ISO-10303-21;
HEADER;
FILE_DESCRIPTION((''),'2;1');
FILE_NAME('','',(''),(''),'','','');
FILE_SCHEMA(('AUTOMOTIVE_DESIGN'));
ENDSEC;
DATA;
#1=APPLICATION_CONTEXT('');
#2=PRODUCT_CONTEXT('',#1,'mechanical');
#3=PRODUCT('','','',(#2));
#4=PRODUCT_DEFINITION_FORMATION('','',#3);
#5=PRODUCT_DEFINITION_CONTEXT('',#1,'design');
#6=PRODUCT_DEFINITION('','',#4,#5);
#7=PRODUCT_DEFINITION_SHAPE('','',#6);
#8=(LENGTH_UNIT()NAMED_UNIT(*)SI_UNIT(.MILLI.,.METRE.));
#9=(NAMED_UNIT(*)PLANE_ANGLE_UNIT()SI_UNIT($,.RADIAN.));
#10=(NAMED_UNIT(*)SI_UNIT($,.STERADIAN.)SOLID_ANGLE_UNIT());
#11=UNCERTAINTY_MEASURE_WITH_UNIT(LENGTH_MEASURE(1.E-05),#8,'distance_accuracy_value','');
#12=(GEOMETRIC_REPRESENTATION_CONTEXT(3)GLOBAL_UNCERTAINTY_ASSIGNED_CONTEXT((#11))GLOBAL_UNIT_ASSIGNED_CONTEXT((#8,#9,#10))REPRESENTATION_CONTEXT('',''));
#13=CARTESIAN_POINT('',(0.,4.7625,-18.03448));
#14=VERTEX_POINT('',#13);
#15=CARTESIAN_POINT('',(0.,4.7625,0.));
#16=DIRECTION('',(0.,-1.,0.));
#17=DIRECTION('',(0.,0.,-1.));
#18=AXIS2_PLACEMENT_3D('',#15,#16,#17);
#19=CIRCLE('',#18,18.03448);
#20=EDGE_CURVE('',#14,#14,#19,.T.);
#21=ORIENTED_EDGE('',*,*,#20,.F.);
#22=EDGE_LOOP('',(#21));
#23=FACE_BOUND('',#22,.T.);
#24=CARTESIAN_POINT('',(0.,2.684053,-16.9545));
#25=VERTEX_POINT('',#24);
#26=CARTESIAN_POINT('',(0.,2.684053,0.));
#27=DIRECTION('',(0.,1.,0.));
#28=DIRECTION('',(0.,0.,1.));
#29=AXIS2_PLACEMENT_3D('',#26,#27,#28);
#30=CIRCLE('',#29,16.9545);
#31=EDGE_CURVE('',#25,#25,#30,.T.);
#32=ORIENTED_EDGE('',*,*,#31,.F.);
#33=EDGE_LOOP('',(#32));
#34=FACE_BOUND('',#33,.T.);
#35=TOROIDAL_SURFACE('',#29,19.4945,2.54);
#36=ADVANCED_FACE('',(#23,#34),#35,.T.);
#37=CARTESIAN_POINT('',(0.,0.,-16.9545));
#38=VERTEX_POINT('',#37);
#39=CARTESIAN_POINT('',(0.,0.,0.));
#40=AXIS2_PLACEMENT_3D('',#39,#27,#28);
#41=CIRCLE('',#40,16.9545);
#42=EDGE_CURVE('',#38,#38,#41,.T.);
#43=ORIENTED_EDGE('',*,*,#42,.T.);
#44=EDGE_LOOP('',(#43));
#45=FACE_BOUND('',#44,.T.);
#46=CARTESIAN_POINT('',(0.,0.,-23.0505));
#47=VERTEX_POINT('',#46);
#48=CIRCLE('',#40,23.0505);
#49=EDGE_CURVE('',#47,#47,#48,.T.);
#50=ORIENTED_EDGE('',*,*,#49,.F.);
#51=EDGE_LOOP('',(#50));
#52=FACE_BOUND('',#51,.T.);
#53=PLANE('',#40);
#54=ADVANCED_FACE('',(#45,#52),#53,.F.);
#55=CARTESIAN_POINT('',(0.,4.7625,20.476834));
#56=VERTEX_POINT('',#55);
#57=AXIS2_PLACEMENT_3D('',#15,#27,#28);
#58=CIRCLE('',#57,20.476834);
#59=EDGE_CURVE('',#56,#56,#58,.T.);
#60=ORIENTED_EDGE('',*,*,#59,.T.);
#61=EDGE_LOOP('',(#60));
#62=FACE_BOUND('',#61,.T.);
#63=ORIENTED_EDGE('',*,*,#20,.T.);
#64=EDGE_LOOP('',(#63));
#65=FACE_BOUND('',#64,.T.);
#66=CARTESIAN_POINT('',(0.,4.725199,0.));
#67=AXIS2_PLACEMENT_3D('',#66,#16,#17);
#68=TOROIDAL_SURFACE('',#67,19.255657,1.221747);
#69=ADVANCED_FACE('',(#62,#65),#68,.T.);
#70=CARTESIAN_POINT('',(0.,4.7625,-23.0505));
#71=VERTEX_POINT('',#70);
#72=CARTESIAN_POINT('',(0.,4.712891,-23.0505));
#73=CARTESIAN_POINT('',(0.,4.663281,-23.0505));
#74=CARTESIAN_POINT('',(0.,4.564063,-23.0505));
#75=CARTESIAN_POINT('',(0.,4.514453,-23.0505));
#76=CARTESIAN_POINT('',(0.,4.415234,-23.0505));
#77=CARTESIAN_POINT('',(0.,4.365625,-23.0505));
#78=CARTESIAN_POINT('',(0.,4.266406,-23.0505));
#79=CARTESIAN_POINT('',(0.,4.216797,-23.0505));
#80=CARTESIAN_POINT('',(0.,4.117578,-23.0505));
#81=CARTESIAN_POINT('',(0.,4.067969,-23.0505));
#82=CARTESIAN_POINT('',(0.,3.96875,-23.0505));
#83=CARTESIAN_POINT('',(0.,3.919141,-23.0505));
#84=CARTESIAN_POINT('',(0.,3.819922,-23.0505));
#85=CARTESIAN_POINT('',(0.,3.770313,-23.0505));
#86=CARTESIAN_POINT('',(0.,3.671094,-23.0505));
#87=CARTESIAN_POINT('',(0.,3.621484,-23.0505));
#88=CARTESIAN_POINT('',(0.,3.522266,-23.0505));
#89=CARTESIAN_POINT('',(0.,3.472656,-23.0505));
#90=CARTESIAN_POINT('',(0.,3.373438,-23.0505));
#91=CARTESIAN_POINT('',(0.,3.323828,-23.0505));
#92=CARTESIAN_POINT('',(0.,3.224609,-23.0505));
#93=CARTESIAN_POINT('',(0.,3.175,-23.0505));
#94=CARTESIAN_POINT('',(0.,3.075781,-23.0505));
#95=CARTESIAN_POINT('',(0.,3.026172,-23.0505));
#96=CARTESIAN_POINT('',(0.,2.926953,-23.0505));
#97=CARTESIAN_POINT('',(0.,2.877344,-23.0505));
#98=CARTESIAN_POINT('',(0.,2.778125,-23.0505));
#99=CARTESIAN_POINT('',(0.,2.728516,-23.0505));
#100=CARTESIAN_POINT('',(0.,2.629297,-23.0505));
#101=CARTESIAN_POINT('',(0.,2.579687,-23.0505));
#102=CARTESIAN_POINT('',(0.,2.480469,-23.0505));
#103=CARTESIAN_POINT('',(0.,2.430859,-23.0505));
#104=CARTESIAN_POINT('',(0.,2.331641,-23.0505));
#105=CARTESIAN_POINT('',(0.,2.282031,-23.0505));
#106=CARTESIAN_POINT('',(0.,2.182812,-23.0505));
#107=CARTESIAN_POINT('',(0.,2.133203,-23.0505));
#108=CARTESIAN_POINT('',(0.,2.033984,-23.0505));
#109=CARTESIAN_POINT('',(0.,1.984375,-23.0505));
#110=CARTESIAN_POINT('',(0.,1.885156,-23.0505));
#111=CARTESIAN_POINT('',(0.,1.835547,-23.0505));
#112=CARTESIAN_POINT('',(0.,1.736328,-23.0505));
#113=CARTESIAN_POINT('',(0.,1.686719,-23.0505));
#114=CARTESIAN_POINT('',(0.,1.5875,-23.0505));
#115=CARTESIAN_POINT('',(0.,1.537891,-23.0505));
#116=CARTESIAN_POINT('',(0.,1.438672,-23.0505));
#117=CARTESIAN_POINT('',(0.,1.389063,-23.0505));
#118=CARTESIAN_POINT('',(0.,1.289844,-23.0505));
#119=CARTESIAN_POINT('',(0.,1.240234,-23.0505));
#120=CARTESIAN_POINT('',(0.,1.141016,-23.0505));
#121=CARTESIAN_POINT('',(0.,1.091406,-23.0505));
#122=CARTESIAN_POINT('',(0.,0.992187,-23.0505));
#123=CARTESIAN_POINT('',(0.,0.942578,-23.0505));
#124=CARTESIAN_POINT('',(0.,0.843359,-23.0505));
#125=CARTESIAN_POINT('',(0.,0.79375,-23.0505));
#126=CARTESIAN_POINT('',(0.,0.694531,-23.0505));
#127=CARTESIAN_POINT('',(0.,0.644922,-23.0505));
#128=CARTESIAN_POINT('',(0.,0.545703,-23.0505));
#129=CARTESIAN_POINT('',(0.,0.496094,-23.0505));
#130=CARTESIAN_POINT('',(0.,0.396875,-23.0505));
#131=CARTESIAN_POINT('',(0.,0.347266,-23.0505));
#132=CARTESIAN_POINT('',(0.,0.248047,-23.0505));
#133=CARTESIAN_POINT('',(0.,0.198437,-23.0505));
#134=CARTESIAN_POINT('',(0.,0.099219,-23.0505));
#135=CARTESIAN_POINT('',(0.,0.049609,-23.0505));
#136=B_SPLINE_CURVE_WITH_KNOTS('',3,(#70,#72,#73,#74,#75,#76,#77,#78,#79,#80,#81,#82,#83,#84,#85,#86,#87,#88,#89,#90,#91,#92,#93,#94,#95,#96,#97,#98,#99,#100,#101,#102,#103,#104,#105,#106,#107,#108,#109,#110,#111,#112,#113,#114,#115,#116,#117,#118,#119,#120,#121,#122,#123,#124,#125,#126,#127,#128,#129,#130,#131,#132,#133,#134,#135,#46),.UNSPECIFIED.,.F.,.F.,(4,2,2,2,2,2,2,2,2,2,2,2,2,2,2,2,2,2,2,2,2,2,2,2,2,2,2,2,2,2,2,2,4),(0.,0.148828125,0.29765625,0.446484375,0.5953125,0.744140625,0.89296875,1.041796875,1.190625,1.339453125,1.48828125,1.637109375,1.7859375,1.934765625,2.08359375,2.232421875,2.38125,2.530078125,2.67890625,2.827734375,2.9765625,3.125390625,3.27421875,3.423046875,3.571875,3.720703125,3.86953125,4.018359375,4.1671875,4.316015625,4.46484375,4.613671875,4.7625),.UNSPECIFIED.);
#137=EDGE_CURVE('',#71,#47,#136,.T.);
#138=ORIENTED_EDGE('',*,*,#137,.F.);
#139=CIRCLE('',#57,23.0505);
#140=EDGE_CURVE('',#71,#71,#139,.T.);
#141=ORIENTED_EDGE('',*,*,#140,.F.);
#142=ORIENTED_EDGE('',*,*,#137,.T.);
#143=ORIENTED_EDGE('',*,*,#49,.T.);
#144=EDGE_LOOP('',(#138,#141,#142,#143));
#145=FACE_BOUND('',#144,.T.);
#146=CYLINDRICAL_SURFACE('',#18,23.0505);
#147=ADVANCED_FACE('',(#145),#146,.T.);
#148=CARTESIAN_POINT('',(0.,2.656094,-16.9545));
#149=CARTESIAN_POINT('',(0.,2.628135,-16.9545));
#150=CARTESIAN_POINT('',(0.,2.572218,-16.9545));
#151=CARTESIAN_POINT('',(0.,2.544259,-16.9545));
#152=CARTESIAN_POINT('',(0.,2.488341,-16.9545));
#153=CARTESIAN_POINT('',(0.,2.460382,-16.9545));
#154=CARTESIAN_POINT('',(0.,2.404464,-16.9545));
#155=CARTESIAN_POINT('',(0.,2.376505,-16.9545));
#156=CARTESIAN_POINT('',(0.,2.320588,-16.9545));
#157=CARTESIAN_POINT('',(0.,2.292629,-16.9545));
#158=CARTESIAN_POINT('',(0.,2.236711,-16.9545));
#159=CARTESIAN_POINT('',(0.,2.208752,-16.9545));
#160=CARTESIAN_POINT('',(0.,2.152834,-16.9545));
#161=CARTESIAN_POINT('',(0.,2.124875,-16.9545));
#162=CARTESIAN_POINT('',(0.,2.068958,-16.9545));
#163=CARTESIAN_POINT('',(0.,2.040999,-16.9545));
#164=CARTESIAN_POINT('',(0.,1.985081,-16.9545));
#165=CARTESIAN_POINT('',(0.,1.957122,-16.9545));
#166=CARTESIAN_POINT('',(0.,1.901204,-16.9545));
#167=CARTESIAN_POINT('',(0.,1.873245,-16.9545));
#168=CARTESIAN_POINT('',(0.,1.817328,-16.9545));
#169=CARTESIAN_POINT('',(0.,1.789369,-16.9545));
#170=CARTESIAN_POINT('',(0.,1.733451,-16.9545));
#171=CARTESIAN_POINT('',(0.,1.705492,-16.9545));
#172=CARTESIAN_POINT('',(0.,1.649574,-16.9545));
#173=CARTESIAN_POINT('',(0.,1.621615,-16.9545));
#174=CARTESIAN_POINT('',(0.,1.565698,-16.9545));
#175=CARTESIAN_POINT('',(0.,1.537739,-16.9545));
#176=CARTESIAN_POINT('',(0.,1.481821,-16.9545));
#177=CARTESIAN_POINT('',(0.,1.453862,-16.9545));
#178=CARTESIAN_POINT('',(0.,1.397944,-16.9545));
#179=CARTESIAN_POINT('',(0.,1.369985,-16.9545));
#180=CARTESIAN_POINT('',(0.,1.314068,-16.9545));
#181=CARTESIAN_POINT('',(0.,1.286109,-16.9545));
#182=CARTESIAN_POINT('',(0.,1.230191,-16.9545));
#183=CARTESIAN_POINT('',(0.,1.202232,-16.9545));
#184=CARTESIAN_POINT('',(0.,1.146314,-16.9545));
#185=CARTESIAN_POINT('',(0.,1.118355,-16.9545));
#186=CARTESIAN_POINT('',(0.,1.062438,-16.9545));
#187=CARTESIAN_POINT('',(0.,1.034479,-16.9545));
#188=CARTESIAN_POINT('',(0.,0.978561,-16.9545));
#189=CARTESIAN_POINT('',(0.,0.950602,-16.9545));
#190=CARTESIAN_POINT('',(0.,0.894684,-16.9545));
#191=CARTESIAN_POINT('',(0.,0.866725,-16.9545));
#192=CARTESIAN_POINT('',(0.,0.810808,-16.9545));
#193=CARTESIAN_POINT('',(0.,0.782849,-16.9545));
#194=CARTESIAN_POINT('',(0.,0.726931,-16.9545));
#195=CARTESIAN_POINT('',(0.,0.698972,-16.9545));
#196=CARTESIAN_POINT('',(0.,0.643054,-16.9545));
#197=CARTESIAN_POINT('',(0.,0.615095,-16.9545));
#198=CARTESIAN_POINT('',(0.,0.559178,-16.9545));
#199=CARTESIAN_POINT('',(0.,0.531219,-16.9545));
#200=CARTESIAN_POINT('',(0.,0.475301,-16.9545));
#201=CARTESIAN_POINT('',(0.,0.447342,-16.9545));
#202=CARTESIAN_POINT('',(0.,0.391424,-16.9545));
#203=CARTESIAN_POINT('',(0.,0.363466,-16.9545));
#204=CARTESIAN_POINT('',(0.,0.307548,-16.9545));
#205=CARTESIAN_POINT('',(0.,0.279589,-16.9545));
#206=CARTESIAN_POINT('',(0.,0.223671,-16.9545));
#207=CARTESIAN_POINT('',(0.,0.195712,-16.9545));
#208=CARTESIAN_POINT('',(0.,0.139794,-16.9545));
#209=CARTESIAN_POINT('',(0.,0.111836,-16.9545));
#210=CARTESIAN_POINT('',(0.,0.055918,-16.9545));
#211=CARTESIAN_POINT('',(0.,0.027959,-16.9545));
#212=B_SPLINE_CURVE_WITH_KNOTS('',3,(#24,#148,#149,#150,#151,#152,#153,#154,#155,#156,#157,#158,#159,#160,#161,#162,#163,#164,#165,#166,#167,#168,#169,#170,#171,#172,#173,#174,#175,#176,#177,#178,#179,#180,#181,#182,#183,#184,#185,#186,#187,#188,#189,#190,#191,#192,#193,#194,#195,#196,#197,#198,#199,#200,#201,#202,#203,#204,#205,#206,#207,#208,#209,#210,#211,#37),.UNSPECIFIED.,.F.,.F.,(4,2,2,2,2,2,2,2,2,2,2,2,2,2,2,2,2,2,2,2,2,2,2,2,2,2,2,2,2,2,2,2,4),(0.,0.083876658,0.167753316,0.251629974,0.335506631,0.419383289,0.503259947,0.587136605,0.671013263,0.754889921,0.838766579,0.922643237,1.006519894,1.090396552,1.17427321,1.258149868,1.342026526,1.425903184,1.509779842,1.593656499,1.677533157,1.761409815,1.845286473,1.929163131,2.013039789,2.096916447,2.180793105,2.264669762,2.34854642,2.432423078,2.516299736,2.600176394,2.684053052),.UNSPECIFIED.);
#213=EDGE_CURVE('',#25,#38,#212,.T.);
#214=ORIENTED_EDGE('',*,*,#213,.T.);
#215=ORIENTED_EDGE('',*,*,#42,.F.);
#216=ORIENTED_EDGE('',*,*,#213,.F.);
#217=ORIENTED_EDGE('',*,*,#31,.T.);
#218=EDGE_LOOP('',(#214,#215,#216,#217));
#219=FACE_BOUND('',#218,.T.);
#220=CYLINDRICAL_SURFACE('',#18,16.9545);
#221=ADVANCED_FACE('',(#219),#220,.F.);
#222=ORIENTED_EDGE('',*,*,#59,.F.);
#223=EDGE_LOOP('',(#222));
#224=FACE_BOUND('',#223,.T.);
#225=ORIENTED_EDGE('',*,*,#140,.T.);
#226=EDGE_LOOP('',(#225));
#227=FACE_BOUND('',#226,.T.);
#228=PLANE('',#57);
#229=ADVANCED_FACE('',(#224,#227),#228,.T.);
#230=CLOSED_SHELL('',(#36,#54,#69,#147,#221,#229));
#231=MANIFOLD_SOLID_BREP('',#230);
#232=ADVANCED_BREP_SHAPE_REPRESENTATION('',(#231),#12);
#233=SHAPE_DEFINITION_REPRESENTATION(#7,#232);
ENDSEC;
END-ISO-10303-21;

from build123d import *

# Parameters (mm, degrees)
SKETCH1_R           = 23.0505
SKETCH1_R_2         = 16.9545
BOSS_EXTRUDE1_DEPTH = 4.7625
FILLET1_R           = 2.54


with BuildPart() as part:
    # Sketch1 → Boss-Extrude1 (new body)
    with BuildSketch(Plane(origin=(0, 0, 0), x_dir=(1, 0, 0), z_dir=(0, 1, 0))):
        with Locations(Location((0, 0, 0), (0, 0, 90))):
            Circle(SKETCH1_R)
        with Locations(Location((0, 0, 0), (0, 0, 90))):
            Circle(SKETCH1_R_2, mode=Mode.SUBTRACT)
    extrude(amount=BOSS_EXTRUDE1_DEPTH)

    # Sketch2 → Revolve1 (revolve)
    with BuildSketch(Plane.XY, mode=Mode.PRIVATE) as revolve1_sk:
        with BuildLine():
            Line((18.034, 4.710412046), (20.477314517, 4.739986951))
            ThreePointArc((20.477314517, 4.739986951), (19.240869806, 5.946856757), (18.034, 4.710412046))
        make_face()
    revolve(revolve1_sk.sketch.rotate(Axis((0, 0, 0), (0, 1, 0)), 90), axis=Axis((0, 0, 0), (0, 1, 0)))

    # Fillet1
    # the kernel refuses this fillet: 2.54 mm, written as the material it takes off along each edge
    with BuildSketch(Plane(origin=(0, 4.7625, 0), x_dir=(0, 0, -1), z_dir=(1, 0, 0))) as fillet1_piece_1:
        with BuildLine():
            CenterArc((19.4945, -2.078446948), FILLET1_R, 125.086398031, 54.913601969)
            Line((18.03448004, 0), (18.005279641, 0.041568939))
            ThreePointArc((18.005279641, 0.041568939), (17.49449002, 0.0508), (16.9545, 0.0508))
            Line((16.9545, 0.0508), (16.9037, 0))
            Line((16.9037, 0), (16.9037, -2.078446948))
            Line((16.9037, -2.078446948), (16.9545, -2.078446948))
        make_face()
    revolve(axis=Axis((0, 4.7625, 0), (0, 1, 0)), mode=Mode.SUBTRACT)


solid = part.part
